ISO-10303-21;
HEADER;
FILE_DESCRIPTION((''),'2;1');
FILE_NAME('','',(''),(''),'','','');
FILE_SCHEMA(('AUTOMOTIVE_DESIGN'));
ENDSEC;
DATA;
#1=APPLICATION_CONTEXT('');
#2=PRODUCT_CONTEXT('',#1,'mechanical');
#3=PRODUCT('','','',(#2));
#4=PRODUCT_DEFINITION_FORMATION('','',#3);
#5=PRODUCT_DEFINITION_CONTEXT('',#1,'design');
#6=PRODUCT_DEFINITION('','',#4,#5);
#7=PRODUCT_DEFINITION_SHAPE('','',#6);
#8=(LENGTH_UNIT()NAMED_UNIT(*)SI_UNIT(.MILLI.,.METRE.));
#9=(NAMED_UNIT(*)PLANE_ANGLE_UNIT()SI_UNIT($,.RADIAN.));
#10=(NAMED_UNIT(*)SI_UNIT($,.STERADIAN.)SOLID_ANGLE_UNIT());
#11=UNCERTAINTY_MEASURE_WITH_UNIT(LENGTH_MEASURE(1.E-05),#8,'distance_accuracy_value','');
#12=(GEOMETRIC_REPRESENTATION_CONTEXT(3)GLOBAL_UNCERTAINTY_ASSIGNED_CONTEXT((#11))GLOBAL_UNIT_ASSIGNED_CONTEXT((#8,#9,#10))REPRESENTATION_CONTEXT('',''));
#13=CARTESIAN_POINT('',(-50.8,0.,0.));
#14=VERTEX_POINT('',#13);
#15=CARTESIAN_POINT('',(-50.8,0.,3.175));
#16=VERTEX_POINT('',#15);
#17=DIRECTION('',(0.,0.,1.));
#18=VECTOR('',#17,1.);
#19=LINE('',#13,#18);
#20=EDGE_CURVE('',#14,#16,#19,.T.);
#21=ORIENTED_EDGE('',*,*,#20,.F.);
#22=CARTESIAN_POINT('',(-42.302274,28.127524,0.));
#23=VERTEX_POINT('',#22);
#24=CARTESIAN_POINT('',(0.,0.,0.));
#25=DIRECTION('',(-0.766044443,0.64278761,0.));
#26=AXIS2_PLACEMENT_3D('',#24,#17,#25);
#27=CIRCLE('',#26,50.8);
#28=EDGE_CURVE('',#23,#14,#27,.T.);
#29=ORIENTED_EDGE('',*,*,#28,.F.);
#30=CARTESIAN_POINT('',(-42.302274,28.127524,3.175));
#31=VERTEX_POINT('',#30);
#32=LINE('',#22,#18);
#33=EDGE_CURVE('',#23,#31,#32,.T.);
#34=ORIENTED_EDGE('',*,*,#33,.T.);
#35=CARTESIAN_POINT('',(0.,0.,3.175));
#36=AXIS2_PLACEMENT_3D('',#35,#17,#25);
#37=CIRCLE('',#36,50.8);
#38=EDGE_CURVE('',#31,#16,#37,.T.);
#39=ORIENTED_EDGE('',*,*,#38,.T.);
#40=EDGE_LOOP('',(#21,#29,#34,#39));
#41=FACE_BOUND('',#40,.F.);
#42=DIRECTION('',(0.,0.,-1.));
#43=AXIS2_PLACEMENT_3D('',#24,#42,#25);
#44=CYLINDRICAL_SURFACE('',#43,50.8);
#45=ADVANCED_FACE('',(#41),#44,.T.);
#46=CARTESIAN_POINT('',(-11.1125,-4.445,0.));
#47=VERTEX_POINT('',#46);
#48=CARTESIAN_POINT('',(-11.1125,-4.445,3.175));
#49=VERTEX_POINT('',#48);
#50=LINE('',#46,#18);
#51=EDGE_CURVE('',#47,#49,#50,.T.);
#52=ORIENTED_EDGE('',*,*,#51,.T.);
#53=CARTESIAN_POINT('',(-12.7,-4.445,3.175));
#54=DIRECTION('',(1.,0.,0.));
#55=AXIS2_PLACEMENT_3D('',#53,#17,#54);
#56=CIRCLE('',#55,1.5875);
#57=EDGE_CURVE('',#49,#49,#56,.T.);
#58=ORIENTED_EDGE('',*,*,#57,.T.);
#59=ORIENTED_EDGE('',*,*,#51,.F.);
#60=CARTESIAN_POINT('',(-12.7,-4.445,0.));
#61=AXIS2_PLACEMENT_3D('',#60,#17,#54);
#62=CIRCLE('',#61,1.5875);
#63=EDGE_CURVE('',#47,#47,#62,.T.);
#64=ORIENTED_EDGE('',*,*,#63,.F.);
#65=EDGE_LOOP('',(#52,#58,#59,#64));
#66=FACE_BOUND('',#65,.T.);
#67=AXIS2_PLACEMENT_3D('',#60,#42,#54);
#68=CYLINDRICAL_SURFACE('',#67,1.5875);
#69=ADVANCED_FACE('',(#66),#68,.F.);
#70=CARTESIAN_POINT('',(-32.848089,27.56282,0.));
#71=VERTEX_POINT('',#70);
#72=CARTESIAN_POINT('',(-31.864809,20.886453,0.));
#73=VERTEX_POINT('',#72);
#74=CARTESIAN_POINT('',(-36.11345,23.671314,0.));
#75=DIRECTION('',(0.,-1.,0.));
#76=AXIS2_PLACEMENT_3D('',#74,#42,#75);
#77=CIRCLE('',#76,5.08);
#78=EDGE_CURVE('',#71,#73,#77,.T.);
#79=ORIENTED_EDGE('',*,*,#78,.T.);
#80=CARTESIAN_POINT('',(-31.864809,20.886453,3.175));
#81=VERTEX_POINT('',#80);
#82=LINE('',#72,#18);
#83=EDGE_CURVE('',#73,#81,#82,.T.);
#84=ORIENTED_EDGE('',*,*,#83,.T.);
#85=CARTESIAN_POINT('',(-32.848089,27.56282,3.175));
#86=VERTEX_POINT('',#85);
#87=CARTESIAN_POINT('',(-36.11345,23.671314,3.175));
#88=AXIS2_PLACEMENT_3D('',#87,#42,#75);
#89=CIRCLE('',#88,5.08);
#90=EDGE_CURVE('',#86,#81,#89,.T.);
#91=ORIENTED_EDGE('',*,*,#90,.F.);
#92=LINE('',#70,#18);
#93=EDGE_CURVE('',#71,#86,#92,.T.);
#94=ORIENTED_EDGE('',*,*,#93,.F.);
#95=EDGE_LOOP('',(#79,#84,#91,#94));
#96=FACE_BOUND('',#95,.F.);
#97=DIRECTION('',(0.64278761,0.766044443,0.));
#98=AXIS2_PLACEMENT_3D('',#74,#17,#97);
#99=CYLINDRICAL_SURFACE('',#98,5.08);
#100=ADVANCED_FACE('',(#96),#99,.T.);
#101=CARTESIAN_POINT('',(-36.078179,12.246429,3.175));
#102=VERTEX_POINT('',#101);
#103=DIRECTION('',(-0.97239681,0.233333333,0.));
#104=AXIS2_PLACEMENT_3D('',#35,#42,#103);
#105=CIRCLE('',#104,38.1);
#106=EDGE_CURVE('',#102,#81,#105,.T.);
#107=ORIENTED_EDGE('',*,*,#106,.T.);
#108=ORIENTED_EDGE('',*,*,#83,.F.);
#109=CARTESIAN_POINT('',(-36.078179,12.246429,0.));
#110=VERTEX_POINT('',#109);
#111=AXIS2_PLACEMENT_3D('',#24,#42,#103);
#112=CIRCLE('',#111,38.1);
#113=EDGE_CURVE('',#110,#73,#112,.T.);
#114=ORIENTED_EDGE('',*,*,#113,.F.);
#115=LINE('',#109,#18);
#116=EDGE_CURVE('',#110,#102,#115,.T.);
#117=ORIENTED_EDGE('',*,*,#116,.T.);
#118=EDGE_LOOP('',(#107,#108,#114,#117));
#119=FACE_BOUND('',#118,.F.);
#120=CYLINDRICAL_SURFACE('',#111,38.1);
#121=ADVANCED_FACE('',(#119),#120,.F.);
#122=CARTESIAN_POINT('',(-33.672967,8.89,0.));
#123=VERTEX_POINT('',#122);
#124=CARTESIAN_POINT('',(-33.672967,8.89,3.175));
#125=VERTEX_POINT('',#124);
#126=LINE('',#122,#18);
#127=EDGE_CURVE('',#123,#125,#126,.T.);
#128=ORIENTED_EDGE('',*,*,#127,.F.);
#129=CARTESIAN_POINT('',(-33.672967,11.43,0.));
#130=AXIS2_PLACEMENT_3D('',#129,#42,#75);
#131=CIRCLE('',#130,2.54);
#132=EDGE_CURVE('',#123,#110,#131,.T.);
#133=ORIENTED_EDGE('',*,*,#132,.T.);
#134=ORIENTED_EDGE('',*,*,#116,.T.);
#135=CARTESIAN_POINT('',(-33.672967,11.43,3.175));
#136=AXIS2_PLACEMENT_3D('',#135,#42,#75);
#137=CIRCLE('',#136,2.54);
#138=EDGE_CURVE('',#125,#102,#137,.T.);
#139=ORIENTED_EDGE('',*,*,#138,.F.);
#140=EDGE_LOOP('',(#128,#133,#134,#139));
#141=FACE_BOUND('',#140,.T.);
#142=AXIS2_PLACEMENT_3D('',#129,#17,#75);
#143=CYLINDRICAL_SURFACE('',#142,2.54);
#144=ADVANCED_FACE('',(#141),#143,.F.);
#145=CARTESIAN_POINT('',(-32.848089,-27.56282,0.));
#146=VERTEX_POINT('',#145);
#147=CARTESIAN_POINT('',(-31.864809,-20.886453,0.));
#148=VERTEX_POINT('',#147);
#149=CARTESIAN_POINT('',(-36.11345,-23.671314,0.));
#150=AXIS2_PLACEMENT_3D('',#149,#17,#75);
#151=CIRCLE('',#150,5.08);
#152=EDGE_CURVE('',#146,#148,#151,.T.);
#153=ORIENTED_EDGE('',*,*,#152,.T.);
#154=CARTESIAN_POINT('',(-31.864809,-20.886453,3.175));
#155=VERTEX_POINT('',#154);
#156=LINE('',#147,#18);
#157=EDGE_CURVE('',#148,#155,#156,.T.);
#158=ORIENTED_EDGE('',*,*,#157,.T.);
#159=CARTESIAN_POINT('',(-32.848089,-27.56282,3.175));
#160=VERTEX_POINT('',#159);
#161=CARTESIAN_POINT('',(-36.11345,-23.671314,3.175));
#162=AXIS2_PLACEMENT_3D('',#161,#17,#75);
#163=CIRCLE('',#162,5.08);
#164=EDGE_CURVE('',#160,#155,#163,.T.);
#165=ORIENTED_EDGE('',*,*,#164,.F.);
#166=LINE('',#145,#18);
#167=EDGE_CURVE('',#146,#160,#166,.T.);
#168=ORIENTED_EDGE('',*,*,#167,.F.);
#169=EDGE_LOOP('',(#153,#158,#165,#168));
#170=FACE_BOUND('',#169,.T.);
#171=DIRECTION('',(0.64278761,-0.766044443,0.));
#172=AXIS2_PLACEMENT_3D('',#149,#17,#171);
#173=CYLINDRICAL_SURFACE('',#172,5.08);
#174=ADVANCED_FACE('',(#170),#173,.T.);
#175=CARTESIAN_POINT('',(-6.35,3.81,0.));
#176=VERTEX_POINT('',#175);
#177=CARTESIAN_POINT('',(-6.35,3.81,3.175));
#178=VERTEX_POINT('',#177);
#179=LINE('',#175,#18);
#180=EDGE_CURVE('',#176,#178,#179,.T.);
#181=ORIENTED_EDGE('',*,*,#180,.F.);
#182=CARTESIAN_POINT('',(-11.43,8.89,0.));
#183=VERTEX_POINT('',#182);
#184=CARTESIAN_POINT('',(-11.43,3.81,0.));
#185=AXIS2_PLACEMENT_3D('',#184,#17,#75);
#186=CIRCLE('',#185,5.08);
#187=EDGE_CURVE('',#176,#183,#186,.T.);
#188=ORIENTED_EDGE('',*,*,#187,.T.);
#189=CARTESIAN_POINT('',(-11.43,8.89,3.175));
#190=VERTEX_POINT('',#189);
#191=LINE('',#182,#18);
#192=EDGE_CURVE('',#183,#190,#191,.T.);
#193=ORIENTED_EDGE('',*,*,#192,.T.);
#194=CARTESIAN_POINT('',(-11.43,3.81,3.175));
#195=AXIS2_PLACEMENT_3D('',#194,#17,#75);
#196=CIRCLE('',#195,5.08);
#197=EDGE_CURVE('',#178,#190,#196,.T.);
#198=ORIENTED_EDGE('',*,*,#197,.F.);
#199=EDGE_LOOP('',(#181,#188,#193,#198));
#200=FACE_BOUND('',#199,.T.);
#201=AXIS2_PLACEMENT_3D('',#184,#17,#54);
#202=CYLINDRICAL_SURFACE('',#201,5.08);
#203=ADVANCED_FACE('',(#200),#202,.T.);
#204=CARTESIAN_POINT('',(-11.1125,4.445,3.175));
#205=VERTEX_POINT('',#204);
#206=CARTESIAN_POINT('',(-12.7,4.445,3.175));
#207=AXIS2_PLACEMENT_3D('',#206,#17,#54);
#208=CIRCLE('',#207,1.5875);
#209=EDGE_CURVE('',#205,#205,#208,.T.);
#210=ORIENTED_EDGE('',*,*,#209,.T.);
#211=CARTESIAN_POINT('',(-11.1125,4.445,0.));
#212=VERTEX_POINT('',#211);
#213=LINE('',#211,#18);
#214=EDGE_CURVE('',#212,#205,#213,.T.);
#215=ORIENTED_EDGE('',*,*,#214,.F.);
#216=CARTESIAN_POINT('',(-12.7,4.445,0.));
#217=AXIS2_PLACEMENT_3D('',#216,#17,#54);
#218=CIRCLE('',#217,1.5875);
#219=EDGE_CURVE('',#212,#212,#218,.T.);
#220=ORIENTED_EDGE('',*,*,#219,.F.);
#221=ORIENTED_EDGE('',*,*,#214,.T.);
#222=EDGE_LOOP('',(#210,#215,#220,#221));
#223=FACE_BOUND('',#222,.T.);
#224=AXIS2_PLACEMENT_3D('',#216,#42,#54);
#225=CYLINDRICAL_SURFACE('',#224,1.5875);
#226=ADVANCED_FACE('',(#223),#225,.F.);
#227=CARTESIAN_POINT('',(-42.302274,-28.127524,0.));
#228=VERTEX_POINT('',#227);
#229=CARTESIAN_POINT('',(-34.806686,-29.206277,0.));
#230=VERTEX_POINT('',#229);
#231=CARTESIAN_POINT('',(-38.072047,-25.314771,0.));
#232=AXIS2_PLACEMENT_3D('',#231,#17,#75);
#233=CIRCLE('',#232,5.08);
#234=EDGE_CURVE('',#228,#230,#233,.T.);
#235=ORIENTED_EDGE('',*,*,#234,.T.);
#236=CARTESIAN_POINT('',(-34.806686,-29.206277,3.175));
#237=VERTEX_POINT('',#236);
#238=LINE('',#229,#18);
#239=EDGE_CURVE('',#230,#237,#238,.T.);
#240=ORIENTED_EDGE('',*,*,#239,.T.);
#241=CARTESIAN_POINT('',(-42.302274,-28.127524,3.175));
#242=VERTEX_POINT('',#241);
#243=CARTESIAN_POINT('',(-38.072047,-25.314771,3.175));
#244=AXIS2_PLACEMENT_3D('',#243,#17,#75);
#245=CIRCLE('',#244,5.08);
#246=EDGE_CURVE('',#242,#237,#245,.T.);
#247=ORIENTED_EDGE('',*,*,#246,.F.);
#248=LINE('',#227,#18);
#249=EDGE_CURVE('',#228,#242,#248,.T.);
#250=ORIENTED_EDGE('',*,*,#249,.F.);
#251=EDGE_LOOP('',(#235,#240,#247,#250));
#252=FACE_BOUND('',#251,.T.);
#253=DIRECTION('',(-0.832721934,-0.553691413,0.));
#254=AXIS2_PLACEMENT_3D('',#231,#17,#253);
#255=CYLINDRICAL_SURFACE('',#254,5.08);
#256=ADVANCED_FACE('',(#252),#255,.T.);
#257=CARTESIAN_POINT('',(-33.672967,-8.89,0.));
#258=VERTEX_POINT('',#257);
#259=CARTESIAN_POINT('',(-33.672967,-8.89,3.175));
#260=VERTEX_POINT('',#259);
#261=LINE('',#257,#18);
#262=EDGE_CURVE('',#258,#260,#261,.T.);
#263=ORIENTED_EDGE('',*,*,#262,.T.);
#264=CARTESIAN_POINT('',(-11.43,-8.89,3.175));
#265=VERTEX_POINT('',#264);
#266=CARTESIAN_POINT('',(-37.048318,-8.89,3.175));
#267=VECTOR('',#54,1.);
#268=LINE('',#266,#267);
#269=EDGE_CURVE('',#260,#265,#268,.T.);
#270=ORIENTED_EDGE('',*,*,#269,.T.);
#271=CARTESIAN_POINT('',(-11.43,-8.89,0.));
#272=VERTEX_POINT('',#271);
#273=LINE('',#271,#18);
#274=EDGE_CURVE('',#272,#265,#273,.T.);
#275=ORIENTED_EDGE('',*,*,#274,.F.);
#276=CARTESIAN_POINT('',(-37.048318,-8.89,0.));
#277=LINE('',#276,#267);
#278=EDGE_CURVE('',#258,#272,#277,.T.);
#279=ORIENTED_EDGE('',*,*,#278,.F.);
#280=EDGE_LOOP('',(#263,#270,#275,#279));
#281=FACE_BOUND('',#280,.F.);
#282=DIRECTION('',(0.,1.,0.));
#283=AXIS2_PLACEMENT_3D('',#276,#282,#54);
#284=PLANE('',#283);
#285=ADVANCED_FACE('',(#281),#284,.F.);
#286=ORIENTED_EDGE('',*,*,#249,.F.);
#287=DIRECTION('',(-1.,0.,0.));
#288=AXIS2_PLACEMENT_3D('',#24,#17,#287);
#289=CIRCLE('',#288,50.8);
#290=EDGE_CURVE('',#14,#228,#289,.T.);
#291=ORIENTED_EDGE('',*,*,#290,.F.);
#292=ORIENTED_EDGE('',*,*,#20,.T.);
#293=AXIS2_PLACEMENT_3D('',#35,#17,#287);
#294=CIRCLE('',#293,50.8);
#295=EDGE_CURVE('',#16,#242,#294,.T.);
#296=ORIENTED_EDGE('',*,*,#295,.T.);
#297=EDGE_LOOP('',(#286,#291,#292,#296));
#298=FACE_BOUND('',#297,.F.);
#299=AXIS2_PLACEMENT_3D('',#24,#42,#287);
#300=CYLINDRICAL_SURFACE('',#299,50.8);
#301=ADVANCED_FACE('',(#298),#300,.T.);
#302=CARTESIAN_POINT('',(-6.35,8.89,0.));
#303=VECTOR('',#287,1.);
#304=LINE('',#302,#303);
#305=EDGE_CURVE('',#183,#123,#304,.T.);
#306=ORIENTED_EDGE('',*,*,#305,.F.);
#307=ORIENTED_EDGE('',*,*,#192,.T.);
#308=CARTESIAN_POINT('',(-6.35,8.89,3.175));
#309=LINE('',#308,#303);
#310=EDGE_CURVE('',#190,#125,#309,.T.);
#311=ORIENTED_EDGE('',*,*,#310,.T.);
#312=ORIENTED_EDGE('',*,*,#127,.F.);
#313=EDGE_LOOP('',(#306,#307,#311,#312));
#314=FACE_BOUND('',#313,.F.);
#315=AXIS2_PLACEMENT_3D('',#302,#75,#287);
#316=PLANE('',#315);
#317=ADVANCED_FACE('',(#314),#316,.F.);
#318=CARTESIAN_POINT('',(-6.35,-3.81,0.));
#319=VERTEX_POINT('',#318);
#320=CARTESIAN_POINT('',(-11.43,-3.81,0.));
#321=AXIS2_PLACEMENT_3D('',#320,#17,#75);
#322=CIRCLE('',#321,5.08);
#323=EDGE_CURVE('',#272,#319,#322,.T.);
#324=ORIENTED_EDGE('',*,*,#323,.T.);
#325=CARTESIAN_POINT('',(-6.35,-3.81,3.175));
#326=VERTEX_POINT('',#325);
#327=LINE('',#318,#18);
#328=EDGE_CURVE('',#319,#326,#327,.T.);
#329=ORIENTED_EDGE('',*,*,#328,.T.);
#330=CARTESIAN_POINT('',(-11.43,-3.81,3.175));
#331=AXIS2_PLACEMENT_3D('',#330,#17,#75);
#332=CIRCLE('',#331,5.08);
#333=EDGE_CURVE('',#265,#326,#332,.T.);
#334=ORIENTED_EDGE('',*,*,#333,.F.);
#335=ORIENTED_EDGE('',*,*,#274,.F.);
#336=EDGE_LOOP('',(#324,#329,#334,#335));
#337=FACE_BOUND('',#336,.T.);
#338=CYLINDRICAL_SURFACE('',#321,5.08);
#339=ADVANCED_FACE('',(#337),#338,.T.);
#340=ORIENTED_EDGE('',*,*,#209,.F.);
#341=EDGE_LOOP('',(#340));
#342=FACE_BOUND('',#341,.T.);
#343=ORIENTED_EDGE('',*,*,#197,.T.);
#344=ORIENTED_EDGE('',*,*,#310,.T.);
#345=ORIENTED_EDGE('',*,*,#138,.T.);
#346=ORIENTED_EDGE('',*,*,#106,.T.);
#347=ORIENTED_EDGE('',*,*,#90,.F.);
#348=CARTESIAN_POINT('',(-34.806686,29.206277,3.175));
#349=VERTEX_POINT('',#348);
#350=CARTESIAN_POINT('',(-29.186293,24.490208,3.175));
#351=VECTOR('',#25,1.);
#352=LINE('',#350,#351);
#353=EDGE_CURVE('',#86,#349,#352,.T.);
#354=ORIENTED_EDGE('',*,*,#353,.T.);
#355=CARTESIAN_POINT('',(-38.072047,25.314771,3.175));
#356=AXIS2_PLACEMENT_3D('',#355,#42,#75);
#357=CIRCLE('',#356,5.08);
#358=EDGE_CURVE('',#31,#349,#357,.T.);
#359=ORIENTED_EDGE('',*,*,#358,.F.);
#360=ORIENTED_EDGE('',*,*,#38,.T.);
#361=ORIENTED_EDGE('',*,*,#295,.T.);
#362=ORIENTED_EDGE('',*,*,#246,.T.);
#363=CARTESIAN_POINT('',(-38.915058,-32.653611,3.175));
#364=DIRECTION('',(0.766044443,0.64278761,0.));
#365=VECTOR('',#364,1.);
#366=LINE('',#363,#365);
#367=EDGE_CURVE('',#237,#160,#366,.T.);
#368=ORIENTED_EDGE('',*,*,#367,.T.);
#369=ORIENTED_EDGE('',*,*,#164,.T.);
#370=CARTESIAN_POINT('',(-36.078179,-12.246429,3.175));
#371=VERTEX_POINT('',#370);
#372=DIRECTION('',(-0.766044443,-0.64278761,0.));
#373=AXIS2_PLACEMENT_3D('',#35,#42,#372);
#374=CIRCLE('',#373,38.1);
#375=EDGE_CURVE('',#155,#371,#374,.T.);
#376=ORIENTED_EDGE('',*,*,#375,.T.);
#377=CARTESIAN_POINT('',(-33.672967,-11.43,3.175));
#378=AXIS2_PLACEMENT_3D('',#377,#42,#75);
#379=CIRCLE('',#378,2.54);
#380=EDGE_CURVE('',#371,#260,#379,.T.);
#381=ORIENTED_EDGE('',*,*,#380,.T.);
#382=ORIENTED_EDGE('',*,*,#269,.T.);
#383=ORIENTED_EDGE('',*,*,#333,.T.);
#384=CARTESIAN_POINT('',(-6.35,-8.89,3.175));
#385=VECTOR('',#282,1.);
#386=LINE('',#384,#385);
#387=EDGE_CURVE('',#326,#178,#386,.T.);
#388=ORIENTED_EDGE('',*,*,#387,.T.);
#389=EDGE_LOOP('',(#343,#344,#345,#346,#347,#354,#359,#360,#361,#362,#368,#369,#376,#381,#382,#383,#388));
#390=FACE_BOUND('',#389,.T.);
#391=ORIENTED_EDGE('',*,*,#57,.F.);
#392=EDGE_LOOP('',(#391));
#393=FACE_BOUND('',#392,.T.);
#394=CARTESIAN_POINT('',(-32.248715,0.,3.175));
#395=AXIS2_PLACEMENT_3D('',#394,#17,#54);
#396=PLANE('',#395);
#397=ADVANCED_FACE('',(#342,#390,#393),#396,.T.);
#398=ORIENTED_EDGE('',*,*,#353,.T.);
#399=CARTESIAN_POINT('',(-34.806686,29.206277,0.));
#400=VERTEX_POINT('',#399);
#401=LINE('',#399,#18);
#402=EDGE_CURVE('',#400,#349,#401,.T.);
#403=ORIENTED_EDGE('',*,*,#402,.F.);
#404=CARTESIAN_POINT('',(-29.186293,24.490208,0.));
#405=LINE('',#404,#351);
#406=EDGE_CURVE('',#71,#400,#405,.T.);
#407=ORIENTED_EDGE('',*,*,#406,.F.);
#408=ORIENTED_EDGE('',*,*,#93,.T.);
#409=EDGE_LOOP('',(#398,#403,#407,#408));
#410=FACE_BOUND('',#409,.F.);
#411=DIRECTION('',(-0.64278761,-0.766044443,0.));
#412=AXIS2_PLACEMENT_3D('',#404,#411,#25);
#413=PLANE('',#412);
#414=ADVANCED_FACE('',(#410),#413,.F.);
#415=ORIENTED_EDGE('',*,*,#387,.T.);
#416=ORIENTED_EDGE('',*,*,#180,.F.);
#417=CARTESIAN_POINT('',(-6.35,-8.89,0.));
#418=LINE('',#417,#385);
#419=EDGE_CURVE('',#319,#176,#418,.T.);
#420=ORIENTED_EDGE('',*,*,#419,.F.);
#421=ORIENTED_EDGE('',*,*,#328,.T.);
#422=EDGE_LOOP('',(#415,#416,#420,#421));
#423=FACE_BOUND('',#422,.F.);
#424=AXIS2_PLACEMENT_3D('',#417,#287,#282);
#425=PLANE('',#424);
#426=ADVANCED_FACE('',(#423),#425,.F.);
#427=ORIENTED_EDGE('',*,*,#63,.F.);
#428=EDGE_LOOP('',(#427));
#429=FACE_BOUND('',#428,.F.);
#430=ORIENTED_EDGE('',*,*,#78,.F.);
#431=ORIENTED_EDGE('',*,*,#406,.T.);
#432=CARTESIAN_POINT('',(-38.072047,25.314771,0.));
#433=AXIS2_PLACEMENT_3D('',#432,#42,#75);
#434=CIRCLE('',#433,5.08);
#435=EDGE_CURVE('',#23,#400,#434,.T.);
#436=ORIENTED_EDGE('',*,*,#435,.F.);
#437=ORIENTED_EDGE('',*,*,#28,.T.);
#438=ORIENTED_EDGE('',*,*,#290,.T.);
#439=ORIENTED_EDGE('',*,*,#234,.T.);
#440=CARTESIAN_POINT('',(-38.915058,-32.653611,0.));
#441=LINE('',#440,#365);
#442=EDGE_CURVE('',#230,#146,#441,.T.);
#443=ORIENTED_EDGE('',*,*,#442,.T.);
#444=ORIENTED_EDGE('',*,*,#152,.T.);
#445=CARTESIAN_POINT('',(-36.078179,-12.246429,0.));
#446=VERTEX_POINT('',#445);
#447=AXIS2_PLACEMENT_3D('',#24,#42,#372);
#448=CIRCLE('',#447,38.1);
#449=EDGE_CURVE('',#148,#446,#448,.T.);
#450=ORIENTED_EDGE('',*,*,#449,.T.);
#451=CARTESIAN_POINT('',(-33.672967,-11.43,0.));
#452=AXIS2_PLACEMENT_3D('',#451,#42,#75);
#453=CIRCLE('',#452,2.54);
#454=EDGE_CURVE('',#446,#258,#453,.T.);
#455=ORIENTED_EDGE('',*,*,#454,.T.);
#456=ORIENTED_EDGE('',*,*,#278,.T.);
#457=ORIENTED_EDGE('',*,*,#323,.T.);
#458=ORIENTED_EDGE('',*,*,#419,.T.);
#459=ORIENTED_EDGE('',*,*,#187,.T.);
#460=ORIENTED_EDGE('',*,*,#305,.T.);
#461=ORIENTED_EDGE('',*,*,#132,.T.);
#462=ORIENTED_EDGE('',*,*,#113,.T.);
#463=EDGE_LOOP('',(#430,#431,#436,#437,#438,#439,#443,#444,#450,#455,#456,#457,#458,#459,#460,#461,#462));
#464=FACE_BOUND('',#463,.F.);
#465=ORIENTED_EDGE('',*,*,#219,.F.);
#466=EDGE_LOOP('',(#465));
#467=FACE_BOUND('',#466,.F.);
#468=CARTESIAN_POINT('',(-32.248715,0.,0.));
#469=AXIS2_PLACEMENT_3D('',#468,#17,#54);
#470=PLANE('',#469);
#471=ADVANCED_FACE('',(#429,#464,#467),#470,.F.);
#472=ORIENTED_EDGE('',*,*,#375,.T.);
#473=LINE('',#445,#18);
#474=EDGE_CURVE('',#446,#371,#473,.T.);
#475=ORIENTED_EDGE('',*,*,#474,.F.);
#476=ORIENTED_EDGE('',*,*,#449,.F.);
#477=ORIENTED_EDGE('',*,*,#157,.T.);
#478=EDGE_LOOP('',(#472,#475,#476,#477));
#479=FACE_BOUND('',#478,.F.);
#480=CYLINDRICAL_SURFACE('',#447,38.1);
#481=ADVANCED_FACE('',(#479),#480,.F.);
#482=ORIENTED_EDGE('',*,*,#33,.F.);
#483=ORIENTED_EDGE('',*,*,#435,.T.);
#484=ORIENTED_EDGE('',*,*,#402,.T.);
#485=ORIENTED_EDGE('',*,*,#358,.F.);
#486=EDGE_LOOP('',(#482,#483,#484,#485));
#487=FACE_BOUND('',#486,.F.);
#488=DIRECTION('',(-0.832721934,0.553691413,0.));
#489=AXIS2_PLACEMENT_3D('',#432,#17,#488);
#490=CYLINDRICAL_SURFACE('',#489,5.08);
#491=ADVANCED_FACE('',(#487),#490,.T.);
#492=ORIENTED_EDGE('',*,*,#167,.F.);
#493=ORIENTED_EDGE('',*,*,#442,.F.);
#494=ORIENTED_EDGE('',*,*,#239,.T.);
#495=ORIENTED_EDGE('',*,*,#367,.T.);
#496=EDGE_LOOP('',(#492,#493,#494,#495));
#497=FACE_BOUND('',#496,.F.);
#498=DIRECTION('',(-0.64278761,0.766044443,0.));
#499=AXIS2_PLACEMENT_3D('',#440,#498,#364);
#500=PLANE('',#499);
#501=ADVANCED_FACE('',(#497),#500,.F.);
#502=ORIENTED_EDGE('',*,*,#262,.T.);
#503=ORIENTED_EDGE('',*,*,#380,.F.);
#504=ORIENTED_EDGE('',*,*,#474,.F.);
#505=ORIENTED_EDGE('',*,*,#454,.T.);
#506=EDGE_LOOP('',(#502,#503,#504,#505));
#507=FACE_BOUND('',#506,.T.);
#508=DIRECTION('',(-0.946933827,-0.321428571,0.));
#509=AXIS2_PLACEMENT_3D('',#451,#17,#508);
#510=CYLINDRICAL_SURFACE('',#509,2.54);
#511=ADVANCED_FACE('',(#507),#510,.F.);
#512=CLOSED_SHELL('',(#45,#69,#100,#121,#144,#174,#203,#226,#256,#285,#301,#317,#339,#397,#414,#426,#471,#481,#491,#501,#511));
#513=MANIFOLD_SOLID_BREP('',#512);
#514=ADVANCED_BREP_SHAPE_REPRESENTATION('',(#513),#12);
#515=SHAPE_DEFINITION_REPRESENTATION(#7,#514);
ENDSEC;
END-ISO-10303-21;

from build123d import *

# Parameters (mm, degrees)
F0_R     = 1.5875
F1_DEPTH = 3.175
F2_R     = 5.08
F3_R     = 5.08
F4_R     = 2.54
F5_R     = 5.08


with BuildPart() as f1:
    # F0 (on Top) → F1 (new body)
    with BuildSketch(Plane.XY):
        with BuildLine():
            ThreePointArc((-50.8, 0), (-47.7363851359, -17.3746232809), (-38.9150577104, -32.6536105721))
            Line((-38.9150577104, -32.6536105721), (-29.1862932828, -24.4902079291))
            ThreePointArc((-29.1862932828, -24.4902079291), (-34.023485561, -17.14679067), (-37.0483184504, -8.89))
            Line((-37.0483184504, -8.89), (-6.35, -8.89))
            Line((-6.35, -8.89), (-6.35, 0))
            Line((-6.35, 0), (-6.35, 8.89))
            Line((-6.35, 8.89), (-37.0483184504, 8.89))
            ThreePointArc((-37.0483184504, 8.89), (-34.023485561, 17.14679067), (-29.1862932828, 24.4902079291))
            Line((-29.1862932828, 24.4902079291), (-38.9150577104, 32.6536105721))
            ThreePointArc((-38.9150577104, 32.6536105721), (-47.7363851359, 17.3746232809), (-50.8, 0))
        make_face()
        with Locations((-12.7, -4.445)):
            Circle(F0_R, mode=Mode.SUBTRACT)
        with Locations((-12.7, 4.445)):
            Circle(F0_R, mode=Mode.SUBTRACT)
    extrude(amount=F1_DEPTH)

    # F2
    f2_edges = [f1.edges().sort_by_distance(p)[0] for p in [
        (-38.915058, 32.653611, 1.5875),
        (-38.915058, -32.653611, 1.5875),
    ]]
    fillet(f2_edges, radius=F2_R)

    # F3
    f3_edges = [f1.edges().sort_by_distance(p)[0] for p in [
        (-29.186293, 24.490208, 1.5875),
        (-29.186293, -24.490208, 1.5875),
    ]]
    fillet(f3_edges, radius=F3_R)

    # F4
    f4_edges = [f1.edges().sort_by_distance(p)[0] for p in [
        (-37.048318, -8.89, 1.5875),
        (-37.048318, 8.89, 1.5875),
    ]]
    fillet(f4_edges, radius=F4_R)

    # F5
    f5_edges = [f1.edges().sort_by_distance(p)[0] for p in [
        (-6.35, 8.89, 1.5875),
        (-6.35, -8.89, 1.5875),
    ]]
    fillet(f5_edges, radius=F5_R)


solid = f1.part
